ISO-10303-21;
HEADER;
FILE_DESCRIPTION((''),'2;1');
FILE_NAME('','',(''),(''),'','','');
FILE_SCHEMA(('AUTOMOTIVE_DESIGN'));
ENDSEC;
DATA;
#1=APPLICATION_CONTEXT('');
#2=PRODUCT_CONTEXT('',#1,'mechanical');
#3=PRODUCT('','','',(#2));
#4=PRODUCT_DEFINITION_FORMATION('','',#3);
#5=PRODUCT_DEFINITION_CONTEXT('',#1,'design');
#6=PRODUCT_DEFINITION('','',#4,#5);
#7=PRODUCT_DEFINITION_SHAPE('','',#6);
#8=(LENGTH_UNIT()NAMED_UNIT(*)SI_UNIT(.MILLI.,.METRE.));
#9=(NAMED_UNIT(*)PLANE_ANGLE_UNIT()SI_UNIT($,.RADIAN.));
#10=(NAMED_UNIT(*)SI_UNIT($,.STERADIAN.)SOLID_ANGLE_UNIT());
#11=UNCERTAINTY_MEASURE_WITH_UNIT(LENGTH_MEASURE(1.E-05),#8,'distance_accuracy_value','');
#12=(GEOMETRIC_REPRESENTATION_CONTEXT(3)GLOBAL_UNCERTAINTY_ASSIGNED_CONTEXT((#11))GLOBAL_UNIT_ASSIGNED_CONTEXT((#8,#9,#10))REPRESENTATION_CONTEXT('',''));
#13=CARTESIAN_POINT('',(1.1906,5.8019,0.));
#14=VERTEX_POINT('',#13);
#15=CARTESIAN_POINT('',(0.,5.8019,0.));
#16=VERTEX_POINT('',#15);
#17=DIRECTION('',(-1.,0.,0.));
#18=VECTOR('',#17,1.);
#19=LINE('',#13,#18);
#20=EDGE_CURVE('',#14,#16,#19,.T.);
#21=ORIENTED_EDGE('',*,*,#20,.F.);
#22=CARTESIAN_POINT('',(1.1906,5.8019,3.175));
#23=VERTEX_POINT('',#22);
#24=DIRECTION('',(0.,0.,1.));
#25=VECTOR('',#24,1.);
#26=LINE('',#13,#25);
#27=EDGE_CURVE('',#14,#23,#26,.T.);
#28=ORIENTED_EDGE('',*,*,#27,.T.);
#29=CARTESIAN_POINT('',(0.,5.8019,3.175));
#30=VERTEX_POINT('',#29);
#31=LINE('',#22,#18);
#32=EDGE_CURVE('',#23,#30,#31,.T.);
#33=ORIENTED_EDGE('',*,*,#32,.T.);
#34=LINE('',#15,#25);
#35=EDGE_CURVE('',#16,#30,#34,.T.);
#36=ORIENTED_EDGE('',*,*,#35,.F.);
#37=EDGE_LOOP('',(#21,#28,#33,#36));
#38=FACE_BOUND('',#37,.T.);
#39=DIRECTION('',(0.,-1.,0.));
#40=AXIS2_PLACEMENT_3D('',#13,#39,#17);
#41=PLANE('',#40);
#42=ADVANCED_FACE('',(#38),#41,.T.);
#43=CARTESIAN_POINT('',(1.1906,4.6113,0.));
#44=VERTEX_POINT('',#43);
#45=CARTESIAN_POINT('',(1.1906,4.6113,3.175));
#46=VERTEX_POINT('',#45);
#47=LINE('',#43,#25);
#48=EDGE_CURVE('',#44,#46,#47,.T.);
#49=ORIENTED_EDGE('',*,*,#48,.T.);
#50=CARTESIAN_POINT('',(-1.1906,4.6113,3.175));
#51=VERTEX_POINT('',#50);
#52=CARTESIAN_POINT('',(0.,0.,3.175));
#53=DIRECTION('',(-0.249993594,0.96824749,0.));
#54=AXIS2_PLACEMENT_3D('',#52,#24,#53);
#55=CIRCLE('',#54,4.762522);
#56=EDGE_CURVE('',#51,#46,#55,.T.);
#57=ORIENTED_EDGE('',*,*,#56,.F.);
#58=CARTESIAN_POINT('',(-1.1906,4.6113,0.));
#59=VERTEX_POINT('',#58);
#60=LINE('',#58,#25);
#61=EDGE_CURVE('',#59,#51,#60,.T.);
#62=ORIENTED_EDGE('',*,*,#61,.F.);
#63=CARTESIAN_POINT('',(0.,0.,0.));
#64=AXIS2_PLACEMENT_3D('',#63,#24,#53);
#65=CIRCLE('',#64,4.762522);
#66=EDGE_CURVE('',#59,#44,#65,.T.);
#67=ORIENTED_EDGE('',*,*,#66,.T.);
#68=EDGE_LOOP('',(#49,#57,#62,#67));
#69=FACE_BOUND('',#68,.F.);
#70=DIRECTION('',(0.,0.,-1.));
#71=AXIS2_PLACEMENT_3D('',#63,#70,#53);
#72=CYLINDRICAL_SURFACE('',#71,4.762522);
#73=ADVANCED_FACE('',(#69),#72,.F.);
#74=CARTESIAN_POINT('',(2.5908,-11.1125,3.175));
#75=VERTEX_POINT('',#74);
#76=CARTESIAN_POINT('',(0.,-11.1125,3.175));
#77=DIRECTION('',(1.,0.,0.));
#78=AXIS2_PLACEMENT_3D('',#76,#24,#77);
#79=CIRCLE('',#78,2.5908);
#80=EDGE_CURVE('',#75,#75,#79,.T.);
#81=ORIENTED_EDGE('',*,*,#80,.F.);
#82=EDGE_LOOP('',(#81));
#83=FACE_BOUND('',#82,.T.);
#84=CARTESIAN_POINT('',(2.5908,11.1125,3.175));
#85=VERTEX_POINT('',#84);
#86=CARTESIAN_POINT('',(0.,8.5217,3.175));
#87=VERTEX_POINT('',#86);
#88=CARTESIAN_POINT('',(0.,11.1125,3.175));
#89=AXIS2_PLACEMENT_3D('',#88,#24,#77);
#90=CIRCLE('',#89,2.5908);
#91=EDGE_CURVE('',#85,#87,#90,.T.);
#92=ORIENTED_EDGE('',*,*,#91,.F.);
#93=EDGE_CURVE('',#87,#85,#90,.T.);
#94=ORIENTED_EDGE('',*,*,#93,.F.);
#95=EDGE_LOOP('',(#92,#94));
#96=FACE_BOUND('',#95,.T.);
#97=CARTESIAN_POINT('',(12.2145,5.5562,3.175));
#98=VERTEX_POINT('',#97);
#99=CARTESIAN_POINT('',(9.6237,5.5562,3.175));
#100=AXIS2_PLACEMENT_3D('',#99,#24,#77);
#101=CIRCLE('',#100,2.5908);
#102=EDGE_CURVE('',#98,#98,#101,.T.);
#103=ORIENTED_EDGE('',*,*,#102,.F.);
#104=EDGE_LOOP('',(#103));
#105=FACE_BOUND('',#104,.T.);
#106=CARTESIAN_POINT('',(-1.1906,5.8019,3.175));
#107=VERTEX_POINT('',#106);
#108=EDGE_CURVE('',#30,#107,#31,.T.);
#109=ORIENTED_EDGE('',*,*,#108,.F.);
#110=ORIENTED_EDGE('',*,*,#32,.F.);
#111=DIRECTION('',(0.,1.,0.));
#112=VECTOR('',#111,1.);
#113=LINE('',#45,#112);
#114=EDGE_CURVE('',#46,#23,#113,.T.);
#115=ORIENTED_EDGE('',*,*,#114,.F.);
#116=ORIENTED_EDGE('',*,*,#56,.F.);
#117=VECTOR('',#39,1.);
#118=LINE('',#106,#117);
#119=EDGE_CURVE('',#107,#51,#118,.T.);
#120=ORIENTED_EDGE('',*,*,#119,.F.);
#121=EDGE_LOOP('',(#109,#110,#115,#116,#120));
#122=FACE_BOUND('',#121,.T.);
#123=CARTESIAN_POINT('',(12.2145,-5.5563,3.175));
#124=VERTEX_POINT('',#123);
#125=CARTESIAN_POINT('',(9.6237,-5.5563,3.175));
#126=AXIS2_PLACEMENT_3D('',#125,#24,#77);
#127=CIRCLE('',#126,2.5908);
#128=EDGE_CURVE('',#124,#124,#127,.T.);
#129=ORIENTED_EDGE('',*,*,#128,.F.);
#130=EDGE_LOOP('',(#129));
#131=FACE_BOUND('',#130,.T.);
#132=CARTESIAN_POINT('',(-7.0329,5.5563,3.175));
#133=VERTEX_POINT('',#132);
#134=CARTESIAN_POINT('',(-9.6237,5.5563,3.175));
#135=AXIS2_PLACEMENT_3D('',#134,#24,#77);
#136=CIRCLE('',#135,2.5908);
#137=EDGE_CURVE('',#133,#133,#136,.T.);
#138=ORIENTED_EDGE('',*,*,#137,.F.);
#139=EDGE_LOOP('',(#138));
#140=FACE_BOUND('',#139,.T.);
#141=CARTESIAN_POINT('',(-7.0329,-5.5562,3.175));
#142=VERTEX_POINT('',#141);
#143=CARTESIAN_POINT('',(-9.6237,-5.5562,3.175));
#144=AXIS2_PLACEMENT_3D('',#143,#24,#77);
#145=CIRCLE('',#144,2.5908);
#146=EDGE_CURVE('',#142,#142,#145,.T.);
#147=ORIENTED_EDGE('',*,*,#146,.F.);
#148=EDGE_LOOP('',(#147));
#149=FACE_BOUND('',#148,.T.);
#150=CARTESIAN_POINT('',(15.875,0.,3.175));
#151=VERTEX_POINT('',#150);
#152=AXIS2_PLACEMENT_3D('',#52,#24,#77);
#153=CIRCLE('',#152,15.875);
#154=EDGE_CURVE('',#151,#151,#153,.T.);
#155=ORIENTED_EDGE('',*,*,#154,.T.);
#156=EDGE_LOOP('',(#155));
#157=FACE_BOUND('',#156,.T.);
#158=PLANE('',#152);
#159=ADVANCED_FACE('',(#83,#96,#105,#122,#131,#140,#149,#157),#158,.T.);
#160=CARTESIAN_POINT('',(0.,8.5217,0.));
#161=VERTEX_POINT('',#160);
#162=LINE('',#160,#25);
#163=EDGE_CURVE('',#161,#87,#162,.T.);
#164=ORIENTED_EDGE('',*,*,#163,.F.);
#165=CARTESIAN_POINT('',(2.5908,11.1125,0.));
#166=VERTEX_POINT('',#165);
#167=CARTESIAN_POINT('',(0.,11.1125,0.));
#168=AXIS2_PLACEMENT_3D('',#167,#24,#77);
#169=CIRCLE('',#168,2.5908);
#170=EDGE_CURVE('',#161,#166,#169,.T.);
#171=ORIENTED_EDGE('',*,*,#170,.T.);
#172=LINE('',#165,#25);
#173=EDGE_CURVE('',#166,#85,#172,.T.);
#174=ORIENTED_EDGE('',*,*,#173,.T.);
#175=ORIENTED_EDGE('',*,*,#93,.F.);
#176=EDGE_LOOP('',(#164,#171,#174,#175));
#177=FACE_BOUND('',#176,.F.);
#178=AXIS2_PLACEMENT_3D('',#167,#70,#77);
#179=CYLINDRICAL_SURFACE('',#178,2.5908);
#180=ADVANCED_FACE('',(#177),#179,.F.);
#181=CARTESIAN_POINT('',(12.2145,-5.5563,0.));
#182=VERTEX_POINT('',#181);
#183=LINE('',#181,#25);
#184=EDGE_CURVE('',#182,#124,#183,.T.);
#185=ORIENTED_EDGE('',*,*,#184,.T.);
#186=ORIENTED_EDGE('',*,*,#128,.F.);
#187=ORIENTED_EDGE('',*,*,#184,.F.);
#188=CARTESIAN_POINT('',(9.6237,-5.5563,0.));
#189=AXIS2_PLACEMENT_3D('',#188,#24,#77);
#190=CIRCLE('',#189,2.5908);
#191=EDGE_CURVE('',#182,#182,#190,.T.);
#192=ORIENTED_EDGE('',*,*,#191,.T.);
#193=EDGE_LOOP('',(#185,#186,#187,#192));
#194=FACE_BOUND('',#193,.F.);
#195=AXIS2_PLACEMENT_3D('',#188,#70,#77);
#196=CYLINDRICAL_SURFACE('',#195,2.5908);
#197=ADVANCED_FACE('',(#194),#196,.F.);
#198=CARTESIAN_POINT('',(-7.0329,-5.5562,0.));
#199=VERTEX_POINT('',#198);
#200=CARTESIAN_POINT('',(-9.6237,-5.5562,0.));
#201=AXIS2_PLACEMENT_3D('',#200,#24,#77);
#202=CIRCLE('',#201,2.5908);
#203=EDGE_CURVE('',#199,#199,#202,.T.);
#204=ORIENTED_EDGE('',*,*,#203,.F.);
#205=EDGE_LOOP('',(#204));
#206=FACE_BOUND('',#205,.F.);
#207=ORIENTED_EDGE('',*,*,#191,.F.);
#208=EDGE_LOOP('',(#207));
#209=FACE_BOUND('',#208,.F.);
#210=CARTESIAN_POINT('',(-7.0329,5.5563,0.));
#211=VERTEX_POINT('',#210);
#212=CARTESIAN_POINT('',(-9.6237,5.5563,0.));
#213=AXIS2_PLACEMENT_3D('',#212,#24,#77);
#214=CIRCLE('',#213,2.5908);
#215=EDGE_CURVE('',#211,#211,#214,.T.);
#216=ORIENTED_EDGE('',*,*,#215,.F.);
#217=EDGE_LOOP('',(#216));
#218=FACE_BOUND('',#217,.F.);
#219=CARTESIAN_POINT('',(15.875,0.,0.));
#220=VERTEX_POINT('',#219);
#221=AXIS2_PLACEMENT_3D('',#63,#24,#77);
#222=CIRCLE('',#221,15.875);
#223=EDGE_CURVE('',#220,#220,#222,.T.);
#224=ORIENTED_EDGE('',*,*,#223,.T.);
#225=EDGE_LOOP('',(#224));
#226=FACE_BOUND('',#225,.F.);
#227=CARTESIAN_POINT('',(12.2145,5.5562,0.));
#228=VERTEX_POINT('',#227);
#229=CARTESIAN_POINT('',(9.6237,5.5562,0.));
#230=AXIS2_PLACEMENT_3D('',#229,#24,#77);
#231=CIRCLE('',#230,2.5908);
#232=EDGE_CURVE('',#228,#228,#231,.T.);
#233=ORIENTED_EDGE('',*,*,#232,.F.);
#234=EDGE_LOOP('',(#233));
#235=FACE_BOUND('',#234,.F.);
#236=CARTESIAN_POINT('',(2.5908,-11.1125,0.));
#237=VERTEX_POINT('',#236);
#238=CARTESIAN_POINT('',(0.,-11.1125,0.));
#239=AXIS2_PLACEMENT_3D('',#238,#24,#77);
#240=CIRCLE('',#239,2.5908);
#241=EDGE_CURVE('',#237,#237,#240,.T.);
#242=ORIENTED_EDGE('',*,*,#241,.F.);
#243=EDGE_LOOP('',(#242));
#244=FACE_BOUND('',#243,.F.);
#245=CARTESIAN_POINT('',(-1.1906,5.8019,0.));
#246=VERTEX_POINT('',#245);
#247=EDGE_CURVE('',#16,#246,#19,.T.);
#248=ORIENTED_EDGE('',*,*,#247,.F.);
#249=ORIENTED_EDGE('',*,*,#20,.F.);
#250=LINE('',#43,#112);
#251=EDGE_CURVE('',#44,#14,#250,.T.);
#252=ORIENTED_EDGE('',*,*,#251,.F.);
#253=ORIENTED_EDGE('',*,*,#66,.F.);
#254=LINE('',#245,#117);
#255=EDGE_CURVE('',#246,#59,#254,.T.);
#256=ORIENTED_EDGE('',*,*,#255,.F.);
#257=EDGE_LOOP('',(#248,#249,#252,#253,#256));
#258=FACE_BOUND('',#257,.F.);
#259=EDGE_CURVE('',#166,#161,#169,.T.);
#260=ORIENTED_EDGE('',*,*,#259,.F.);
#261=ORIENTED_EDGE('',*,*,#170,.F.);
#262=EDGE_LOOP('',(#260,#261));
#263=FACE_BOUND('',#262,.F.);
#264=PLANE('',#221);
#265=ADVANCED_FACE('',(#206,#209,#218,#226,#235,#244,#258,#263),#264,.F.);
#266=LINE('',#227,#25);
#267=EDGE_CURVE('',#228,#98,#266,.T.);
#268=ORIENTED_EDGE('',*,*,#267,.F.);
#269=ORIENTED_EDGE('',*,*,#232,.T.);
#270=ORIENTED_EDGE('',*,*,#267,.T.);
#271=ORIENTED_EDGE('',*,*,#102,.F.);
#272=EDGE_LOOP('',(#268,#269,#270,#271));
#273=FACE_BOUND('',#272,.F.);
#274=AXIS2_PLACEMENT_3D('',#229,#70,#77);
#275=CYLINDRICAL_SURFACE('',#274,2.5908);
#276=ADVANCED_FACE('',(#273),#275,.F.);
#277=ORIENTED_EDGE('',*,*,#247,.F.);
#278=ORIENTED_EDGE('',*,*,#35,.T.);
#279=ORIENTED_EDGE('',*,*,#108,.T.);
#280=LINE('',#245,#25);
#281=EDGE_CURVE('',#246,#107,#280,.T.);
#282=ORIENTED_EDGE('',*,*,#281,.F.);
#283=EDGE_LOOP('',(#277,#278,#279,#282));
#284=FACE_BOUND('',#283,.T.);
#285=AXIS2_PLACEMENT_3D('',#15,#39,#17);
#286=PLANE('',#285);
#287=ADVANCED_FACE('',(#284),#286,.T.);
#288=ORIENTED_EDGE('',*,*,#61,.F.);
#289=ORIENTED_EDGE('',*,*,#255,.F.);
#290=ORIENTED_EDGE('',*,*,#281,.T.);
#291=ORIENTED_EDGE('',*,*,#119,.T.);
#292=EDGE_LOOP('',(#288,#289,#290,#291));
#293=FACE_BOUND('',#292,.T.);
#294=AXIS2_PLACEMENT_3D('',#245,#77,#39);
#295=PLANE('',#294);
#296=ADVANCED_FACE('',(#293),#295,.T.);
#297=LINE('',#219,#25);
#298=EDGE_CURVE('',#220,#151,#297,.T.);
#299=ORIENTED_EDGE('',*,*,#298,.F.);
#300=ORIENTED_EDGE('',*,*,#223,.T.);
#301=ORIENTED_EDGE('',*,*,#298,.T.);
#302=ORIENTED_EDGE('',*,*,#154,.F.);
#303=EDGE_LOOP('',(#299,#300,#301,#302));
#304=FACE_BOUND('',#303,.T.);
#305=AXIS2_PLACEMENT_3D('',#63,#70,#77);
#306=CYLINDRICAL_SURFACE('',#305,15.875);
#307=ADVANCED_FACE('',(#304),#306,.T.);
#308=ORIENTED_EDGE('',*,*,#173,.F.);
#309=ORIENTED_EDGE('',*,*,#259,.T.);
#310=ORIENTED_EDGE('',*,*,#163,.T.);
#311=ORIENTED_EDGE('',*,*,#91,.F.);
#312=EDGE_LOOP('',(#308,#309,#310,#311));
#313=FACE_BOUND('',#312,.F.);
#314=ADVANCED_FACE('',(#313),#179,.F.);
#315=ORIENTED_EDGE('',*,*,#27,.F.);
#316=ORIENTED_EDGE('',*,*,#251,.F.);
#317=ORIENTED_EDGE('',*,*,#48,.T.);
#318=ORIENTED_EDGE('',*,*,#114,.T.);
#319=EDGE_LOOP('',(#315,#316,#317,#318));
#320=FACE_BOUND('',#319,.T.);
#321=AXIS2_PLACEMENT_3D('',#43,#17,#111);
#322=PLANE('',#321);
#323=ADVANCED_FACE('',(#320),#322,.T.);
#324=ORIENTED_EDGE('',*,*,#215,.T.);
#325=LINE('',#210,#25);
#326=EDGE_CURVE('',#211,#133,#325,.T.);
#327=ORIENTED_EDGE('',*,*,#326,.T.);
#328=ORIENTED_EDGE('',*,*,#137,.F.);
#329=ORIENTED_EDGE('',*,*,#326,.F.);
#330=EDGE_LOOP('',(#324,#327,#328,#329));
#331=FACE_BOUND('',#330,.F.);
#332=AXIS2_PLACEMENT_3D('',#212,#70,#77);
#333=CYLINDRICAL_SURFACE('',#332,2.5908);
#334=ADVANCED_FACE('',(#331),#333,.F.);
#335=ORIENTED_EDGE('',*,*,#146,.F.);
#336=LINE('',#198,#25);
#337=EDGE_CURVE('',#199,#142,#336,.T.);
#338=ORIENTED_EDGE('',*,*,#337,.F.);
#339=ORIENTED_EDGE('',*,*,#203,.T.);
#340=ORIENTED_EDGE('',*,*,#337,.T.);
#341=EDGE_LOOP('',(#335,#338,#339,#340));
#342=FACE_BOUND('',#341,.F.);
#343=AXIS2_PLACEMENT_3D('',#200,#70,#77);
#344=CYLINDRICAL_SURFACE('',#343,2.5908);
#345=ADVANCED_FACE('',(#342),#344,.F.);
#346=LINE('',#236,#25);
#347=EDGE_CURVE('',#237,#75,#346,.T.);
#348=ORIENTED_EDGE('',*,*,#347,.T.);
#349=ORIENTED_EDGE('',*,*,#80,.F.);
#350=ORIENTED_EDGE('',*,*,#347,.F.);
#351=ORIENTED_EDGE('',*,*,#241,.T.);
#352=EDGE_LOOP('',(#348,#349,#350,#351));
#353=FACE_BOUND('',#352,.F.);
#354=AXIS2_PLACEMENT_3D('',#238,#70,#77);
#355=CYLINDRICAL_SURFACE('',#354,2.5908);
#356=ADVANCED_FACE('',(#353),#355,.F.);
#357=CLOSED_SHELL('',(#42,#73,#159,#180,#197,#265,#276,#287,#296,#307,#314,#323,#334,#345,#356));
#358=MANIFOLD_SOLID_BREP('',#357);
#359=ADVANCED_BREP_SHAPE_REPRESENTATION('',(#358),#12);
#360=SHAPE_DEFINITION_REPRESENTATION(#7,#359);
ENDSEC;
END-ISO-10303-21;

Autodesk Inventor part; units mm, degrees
ref_plane "YZ Plane" through (0, 0, 0) normal (1, 0, 0) x (0, 1, 0)
ref_plane "XZ Plane" through (0, 0, 0) normal (0, 1, 0) x (-1, 0, 0)
ref_plane "XY Plane" through (0, 0, 0) normal (0, 0, 1) x (1, 0, 0)
sketch "Sketch1" plane through (0, 0, 0) normal (0, 0, 1) x (1, 0, 0)
  arc A0 (-1.1906, 4.6113) -> (1.1906, 4.6113) centre (0, 0) ccw
  circle A1 centre (0, 0) radius 15.875
  line L0 (0, 4.7625) -> (0, 11.1125)
  circle A2 centre (0, 11.1125) radius 2.5908
  circle A3 centre (-9.6237, 5.5563) radius 2.5908
  circle A4 centre (-9.6237, -5.5562) radius 2.5908
  circle A5 centre (0, -11.1125) radius 2.5908
  circle A6 centre (9.6237, -5.5563) radius 2.5908
  circle A7 centre (9.6237, 5.5562) radius 2.5908
  line L1 (0, 0) -> (-1.1906, 0)
  line L2 (0, 0) -> (1.1906, 0)
  line L3 (1.1906, 0) -> (1.1906, 4.6113)
  line L4 (1.1906, 4.6113) -> (1.1906, 5.8019)
  line L5 (1.1906, 5.8019) -> (-1.1906, 5.8019)
  line L6 (-1.1906, 5.8019) -> (-1.1906, 4.6113)
  dimension "d0" = 9.525
  dimension "d1" = 31.75
  dimension "d2" = 6.35
  dimension "d3" = 5.1816
  dimension "d6" = 360
  dimension "d10" = 1.1906
  dimension "d11" = 1.1906
  dimension "d12" = 1.1906
extrude "Extrusion1" add sketch "Sketch1" along normal blind 3.175
properties part number "Hub for rachet" material "Steel"
